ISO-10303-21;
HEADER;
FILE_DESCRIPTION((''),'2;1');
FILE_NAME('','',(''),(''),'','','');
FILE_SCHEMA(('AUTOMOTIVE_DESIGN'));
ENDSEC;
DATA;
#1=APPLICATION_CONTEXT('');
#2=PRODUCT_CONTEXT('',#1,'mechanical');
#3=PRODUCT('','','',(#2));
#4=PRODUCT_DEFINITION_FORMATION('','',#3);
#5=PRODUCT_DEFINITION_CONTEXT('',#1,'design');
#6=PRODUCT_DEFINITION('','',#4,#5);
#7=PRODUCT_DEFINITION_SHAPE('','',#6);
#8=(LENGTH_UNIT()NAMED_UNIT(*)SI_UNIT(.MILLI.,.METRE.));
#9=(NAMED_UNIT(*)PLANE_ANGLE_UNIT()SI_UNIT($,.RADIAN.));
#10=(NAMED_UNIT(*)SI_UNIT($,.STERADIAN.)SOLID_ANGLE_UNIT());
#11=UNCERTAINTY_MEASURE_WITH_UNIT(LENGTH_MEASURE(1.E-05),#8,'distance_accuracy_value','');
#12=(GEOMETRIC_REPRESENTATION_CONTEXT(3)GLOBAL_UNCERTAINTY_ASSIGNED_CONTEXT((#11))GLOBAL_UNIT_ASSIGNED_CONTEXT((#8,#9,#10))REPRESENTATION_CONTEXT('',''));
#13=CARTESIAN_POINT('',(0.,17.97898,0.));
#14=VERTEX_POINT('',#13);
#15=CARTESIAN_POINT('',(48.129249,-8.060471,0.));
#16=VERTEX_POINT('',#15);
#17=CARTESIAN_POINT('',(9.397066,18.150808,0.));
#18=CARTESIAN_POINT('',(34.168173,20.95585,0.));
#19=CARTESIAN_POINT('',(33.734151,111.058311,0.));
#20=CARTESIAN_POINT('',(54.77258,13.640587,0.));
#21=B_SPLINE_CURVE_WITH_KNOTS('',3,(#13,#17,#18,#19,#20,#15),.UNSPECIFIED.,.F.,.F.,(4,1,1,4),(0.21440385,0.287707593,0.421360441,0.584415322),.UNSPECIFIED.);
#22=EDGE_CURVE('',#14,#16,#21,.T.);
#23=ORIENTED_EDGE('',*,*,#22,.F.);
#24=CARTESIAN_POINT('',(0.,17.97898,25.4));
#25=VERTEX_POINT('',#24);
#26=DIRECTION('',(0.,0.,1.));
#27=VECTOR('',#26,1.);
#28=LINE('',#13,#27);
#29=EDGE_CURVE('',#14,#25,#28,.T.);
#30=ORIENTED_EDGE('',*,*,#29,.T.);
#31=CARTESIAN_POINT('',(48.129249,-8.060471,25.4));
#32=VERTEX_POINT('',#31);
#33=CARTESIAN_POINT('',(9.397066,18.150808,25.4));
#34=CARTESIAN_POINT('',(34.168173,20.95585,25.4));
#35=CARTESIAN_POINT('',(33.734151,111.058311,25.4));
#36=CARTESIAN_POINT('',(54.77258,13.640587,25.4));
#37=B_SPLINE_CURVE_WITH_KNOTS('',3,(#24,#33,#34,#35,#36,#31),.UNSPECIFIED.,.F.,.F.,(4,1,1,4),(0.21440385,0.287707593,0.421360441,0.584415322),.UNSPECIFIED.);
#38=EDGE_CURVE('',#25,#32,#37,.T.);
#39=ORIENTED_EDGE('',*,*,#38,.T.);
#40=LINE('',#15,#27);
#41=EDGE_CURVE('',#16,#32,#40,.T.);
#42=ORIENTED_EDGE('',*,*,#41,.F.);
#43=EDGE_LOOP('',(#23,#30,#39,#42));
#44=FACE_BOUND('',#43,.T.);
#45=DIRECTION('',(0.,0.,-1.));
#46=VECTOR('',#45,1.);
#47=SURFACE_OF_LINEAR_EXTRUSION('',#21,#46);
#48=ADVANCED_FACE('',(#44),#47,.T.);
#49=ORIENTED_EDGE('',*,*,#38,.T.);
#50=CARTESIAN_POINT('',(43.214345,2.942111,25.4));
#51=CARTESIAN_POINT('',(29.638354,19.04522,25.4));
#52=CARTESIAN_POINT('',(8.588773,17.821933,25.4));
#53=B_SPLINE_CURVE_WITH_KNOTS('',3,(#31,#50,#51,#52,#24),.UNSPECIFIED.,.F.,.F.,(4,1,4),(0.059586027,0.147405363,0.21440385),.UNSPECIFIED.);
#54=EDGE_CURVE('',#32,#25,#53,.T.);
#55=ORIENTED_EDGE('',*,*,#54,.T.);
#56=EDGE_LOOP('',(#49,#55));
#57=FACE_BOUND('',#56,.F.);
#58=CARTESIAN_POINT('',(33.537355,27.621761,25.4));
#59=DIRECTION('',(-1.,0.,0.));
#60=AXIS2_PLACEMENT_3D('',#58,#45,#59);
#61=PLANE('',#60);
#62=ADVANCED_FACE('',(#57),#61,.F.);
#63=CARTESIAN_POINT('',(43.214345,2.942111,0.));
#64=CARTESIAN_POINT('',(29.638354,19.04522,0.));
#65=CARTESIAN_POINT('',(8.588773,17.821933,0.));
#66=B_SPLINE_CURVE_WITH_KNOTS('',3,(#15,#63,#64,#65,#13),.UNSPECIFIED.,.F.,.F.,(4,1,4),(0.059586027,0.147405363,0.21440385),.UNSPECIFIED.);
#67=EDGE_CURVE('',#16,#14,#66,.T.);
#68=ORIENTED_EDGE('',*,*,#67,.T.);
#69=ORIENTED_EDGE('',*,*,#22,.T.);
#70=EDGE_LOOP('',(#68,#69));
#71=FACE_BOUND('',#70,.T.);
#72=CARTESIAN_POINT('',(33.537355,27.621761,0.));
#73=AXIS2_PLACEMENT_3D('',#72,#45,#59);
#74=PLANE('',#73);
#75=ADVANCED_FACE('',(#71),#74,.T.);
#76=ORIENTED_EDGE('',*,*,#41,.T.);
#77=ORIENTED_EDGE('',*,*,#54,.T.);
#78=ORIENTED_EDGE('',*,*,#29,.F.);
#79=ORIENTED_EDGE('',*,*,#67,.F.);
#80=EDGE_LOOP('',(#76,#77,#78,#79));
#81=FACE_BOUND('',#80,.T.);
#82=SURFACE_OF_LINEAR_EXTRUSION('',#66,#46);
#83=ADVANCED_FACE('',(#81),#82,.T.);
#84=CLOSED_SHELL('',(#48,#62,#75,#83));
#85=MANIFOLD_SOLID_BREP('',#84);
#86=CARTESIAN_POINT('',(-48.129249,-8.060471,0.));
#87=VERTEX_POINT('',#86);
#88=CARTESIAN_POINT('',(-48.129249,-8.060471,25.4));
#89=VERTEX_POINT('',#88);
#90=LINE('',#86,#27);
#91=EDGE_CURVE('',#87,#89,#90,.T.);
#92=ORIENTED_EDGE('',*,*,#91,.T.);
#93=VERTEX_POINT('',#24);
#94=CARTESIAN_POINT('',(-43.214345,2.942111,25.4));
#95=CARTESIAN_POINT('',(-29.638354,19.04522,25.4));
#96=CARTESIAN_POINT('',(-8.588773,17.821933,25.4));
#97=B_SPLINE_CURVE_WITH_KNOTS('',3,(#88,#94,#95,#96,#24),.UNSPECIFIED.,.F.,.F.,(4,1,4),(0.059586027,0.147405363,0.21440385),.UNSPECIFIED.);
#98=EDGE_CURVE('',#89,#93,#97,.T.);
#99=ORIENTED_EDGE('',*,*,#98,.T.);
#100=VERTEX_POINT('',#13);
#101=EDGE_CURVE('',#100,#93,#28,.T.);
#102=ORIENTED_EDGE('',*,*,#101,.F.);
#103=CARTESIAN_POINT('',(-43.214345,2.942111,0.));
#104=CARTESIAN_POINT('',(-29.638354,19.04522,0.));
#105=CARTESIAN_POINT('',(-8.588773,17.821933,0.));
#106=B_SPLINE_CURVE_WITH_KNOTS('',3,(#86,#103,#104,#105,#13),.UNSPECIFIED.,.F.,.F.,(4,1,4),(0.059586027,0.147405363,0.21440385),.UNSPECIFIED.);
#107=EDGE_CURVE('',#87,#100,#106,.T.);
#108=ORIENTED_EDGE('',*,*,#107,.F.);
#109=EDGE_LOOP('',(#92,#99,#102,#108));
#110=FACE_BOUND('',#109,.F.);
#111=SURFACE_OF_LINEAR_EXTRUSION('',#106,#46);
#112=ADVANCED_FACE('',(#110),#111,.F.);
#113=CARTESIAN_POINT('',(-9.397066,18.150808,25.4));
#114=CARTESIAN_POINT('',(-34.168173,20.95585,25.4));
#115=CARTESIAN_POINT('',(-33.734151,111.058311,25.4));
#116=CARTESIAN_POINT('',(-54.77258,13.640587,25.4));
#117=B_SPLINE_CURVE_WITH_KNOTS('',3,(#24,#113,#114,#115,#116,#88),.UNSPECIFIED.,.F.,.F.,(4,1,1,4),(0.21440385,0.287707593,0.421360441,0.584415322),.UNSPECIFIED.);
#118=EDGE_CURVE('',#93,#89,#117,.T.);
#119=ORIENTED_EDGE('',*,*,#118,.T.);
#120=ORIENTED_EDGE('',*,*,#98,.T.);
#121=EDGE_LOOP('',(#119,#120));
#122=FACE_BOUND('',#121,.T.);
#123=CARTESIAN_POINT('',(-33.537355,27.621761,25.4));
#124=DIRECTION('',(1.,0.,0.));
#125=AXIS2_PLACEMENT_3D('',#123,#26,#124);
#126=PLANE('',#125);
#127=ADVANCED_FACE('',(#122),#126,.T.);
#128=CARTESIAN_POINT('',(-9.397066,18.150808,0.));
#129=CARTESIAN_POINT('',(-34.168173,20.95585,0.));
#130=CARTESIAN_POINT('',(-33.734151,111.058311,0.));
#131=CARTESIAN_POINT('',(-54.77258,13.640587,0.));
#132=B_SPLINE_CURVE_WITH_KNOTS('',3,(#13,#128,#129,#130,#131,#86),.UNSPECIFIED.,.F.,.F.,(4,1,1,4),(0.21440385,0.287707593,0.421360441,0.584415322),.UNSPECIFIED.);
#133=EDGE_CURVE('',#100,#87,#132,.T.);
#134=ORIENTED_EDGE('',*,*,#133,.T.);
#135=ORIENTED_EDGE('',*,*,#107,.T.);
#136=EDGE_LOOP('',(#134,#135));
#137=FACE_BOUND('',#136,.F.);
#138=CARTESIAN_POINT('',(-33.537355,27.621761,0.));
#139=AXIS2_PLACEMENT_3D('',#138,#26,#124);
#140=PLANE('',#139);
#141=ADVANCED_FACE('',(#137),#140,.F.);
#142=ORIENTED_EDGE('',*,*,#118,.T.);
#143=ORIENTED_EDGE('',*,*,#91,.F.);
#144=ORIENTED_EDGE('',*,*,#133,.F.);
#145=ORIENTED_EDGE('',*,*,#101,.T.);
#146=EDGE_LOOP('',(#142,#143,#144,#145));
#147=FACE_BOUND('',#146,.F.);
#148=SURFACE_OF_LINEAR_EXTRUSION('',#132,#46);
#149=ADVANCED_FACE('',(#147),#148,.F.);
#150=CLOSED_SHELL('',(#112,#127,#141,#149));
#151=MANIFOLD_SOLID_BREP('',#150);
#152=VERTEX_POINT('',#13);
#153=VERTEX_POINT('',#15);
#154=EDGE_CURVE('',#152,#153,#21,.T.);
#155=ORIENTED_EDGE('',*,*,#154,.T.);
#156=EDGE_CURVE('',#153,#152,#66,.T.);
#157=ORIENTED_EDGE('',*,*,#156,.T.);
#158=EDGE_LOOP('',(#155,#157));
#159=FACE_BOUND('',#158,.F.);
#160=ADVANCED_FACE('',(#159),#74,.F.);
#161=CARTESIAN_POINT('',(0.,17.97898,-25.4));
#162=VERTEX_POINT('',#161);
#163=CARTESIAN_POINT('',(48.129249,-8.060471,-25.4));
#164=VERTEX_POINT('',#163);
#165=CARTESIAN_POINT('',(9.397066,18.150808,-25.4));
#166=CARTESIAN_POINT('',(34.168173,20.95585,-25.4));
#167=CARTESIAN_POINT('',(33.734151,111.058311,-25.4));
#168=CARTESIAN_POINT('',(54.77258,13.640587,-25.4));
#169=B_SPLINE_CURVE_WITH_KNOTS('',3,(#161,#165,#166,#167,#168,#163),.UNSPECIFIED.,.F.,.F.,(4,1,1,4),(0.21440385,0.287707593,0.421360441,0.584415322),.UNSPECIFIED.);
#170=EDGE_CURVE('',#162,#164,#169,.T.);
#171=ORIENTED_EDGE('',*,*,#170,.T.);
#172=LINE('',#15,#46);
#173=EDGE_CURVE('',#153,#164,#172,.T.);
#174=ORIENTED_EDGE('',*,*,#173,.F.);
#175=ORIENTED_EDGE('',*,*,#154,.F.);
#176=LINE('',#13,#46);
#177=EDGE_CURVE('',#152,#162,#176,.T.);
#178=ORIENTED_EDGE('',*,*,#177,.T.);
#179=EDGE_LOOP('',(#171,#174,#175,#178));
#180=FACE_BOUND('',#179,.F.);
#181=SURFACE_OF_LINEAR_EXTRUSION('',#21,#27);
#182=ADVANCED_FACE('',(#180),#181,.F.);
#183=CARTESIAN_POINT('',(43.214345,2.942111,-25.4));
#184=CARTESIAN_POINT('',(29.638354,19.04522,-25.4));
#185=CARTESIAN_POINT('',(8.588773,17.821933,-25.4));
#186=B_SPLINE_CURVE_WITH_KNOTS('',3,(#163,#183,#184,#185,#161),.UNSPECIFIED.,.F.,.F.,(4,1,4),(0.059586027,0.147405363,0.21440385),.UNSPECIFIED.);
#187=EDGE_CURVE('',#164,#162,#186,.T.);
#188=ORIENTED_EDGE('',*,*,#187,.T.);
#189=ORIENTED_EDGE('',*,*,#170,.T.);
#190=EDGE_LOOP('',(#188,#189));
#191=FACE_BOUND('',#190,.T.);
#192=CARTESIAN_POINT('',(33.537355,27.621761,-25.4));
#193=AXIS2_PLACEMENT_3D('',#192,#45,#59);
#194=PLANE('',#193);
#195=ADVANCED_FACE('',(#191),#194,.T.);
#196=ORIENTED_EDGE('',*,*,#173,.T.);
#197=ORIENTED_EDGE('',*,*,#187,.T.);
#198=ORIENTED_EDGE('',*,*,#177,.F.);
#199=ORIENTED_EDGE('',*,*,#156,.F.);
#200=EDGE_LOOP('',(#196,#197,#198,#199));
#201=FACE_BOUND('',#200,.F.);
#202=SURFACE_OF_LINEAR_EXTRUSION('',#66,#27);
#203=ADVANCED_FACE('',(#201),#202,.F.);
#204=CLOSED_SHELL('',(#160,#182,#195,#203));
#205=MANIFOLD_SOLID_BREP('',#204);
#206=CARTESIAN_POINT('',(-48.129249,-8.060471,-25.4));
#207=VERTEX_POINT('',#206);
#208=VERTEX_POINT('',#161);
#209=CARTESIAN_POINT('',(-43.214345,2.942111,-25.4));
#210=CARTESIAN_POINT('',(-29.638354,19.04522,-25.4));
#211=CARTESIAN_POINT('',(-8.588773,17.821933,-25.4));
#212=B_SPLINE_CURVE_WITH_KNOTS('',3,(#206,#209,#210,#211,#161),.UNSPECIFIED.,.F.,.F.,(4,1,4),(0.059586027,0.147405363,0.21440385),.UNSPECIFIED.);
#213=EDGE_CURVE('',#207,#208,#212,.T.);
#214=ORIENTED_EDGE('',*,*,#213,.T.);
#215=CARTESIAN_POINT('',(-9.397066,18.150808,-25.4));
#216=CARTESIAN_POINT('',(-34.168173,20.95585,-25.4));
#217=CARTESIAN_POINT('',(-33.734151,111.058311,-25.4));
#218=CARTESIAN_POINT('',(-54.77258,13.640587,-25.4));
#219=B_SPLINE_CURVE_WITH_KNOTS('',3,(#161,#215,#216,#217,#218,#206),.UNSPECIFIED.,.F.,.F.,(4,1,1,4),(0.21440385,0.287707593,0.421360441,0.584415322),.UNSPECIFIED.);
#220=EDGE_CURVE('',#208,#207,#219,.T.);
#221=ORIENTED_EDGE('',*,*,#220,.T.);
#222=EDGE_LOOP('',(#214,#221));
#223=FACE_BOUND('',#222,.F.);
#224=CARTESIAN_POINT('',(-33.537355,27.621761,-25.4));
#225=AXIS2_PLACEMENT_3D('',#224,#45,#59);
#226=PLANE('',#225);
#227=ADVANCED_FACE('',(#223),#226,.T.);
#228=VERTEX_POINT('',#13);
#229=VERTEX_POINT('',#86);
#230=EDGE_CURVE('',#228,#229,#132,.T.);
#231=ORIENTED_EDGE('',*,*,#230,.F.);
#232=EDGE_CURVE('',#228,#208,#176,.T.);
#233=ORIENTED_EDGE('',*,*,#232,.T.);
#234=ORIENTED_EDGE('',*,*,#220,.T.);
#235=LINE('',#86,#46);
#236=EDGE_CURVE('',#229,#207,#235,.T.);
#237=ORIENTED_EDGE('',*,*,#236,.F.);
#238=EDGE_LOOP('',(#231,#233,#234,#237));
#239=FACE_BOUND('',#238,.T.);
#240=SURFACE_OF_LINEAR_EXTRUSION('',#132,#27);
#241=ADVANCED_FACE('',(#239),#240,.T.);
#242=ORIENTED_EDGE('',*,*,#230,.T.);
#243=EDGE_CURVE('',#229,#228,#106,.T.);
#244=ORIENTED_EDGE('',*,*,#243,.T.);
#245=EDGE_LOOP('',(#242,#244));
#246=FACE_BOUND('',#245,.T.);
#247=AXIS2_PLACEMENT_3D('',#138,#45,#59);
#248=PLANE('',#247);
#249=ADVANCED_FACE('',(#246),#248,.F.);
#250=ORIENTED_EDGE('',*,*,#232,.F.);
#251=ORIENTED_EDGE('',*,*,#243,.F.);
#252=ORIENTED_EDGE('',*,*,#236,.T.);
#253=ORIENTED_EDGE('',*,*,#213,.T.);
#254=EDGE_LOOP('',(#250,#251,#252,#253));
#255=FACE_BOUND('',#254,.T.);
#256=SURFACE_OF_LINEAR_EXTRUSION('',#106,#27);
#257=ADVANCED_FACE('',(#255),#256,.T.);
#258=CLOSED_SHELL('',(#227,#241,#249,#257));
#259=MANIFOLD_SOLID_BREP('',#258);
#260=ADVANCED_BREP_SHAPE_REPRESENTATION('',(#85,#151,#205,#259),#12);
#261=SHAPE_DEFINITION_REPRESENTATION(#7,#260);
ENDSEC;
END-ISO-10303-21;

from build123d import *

# Parameters (mm, degrees)
F1_DEPTH = 25.4
F2_DEPTH = 25.4


# Not quite as in the source:
# - a pattern or mirror of a feature is missing from the dataset's text; its kind, count and spacing are read off the source's solid


with BuildPart() as f1:
    # F0 (on Top) → F1 (new body)
    with BuildSketch(Plane.XY):
        with BuildLine():
            add(Edge.make_bspline(
                [(0, 17.9789804723), (-9.3970661986, 18.1508080752), (-34.1681733574, 20.9558499948), (-33.7341512053, 111.0583110271), (-54.7725797856, 13.6405870148), (-48.129248964, -8.0604708915)],
                knots=[0.2144038498, 0.2144038498, 0.2144038498, 0.2144038498, 0.2877075932, 0.4213604409, 0.5844153219, 0.5844153219, 0.5844153219, 0.5844153219], degree=3))
            add(Edge.make_bspline(
                [(-48.129248964, -8.0604708915), (-43.214344744, 2.9421106636), (-29.6383542096, 19.0452197015), (-8.5887730826, 17.8219327024), (0, 17.9789804723)],
                knots=[0.0595860268, 0.0595860268, 0.0595860268, 0.0595860268, 0.1474053628, 0.2144038498, 0.2144038498, 0.2144038498, 0.2144038498], degree=3))
        make_face()
    extrude(amount=F1_DEPTH)


with BuildPart() as f1b:
    # F0 (on Top) → F1, piece 2 (new body)
    with BuildSketch(Plane.XY):
        with BuildLine():
            add(Edge.make_bspline(
                [(0, 17.9789804723), (9.3970661986, 18.1508080752), (34.1681733574, 20.9558499948), (33.7341512054, 111.0583110203), (54.7725797817, 13.6405870331), (48.1292489674, -8.0604708804)],
                knots=[0.2144038498, 0.2144038498, 0.2144038498, 0.2144038498, 0.2877075932, 0.4213604409, 0.5844153219, 0.5844153219, 0.5844153219, 0.5844153219], degree=3))
            add(Edge.make_bspline(
                [(48.129248959, -8.0604708805), (43.2143447389, 2.9421106697), (29.6383542056, 19.0452197013), (8.5887730826, 17.8219327024), (0, 17.9789804723)],
                knots=[0.0595860268, 0.0595860268, 0.0595860268, 0.0595860268, 0.1474053628, 0.2144038498, 0.2144038498, 0.2144038498, 0.2144038498], degree=3))
        make_face()
    extrude(amount=F1_DEPTH)


with BuildPart() as f1_copies_1:
    # F1_copies: instance of F1
    add(f1.part.mirror(Plane(origin=(0, 0, 0), x_dir=(-1, 0, 0), z_dir=(0, 0, -1))))


with BuildPart() as f2:
    # F2 (new): faces of the model
    f2_faces = [f1b.part.faces().sort_by_distance(p)[0] for p in [
        (37.8664105419, 29.1812237323, 0),
        (37.8664105419, 29.1812237323, 0),
    ]]
    extrude(f2_faces, amount=F2_DEPTH)


solid = Compound([f1.part, f1b.part, f1_copies_1.part, f2.part])
